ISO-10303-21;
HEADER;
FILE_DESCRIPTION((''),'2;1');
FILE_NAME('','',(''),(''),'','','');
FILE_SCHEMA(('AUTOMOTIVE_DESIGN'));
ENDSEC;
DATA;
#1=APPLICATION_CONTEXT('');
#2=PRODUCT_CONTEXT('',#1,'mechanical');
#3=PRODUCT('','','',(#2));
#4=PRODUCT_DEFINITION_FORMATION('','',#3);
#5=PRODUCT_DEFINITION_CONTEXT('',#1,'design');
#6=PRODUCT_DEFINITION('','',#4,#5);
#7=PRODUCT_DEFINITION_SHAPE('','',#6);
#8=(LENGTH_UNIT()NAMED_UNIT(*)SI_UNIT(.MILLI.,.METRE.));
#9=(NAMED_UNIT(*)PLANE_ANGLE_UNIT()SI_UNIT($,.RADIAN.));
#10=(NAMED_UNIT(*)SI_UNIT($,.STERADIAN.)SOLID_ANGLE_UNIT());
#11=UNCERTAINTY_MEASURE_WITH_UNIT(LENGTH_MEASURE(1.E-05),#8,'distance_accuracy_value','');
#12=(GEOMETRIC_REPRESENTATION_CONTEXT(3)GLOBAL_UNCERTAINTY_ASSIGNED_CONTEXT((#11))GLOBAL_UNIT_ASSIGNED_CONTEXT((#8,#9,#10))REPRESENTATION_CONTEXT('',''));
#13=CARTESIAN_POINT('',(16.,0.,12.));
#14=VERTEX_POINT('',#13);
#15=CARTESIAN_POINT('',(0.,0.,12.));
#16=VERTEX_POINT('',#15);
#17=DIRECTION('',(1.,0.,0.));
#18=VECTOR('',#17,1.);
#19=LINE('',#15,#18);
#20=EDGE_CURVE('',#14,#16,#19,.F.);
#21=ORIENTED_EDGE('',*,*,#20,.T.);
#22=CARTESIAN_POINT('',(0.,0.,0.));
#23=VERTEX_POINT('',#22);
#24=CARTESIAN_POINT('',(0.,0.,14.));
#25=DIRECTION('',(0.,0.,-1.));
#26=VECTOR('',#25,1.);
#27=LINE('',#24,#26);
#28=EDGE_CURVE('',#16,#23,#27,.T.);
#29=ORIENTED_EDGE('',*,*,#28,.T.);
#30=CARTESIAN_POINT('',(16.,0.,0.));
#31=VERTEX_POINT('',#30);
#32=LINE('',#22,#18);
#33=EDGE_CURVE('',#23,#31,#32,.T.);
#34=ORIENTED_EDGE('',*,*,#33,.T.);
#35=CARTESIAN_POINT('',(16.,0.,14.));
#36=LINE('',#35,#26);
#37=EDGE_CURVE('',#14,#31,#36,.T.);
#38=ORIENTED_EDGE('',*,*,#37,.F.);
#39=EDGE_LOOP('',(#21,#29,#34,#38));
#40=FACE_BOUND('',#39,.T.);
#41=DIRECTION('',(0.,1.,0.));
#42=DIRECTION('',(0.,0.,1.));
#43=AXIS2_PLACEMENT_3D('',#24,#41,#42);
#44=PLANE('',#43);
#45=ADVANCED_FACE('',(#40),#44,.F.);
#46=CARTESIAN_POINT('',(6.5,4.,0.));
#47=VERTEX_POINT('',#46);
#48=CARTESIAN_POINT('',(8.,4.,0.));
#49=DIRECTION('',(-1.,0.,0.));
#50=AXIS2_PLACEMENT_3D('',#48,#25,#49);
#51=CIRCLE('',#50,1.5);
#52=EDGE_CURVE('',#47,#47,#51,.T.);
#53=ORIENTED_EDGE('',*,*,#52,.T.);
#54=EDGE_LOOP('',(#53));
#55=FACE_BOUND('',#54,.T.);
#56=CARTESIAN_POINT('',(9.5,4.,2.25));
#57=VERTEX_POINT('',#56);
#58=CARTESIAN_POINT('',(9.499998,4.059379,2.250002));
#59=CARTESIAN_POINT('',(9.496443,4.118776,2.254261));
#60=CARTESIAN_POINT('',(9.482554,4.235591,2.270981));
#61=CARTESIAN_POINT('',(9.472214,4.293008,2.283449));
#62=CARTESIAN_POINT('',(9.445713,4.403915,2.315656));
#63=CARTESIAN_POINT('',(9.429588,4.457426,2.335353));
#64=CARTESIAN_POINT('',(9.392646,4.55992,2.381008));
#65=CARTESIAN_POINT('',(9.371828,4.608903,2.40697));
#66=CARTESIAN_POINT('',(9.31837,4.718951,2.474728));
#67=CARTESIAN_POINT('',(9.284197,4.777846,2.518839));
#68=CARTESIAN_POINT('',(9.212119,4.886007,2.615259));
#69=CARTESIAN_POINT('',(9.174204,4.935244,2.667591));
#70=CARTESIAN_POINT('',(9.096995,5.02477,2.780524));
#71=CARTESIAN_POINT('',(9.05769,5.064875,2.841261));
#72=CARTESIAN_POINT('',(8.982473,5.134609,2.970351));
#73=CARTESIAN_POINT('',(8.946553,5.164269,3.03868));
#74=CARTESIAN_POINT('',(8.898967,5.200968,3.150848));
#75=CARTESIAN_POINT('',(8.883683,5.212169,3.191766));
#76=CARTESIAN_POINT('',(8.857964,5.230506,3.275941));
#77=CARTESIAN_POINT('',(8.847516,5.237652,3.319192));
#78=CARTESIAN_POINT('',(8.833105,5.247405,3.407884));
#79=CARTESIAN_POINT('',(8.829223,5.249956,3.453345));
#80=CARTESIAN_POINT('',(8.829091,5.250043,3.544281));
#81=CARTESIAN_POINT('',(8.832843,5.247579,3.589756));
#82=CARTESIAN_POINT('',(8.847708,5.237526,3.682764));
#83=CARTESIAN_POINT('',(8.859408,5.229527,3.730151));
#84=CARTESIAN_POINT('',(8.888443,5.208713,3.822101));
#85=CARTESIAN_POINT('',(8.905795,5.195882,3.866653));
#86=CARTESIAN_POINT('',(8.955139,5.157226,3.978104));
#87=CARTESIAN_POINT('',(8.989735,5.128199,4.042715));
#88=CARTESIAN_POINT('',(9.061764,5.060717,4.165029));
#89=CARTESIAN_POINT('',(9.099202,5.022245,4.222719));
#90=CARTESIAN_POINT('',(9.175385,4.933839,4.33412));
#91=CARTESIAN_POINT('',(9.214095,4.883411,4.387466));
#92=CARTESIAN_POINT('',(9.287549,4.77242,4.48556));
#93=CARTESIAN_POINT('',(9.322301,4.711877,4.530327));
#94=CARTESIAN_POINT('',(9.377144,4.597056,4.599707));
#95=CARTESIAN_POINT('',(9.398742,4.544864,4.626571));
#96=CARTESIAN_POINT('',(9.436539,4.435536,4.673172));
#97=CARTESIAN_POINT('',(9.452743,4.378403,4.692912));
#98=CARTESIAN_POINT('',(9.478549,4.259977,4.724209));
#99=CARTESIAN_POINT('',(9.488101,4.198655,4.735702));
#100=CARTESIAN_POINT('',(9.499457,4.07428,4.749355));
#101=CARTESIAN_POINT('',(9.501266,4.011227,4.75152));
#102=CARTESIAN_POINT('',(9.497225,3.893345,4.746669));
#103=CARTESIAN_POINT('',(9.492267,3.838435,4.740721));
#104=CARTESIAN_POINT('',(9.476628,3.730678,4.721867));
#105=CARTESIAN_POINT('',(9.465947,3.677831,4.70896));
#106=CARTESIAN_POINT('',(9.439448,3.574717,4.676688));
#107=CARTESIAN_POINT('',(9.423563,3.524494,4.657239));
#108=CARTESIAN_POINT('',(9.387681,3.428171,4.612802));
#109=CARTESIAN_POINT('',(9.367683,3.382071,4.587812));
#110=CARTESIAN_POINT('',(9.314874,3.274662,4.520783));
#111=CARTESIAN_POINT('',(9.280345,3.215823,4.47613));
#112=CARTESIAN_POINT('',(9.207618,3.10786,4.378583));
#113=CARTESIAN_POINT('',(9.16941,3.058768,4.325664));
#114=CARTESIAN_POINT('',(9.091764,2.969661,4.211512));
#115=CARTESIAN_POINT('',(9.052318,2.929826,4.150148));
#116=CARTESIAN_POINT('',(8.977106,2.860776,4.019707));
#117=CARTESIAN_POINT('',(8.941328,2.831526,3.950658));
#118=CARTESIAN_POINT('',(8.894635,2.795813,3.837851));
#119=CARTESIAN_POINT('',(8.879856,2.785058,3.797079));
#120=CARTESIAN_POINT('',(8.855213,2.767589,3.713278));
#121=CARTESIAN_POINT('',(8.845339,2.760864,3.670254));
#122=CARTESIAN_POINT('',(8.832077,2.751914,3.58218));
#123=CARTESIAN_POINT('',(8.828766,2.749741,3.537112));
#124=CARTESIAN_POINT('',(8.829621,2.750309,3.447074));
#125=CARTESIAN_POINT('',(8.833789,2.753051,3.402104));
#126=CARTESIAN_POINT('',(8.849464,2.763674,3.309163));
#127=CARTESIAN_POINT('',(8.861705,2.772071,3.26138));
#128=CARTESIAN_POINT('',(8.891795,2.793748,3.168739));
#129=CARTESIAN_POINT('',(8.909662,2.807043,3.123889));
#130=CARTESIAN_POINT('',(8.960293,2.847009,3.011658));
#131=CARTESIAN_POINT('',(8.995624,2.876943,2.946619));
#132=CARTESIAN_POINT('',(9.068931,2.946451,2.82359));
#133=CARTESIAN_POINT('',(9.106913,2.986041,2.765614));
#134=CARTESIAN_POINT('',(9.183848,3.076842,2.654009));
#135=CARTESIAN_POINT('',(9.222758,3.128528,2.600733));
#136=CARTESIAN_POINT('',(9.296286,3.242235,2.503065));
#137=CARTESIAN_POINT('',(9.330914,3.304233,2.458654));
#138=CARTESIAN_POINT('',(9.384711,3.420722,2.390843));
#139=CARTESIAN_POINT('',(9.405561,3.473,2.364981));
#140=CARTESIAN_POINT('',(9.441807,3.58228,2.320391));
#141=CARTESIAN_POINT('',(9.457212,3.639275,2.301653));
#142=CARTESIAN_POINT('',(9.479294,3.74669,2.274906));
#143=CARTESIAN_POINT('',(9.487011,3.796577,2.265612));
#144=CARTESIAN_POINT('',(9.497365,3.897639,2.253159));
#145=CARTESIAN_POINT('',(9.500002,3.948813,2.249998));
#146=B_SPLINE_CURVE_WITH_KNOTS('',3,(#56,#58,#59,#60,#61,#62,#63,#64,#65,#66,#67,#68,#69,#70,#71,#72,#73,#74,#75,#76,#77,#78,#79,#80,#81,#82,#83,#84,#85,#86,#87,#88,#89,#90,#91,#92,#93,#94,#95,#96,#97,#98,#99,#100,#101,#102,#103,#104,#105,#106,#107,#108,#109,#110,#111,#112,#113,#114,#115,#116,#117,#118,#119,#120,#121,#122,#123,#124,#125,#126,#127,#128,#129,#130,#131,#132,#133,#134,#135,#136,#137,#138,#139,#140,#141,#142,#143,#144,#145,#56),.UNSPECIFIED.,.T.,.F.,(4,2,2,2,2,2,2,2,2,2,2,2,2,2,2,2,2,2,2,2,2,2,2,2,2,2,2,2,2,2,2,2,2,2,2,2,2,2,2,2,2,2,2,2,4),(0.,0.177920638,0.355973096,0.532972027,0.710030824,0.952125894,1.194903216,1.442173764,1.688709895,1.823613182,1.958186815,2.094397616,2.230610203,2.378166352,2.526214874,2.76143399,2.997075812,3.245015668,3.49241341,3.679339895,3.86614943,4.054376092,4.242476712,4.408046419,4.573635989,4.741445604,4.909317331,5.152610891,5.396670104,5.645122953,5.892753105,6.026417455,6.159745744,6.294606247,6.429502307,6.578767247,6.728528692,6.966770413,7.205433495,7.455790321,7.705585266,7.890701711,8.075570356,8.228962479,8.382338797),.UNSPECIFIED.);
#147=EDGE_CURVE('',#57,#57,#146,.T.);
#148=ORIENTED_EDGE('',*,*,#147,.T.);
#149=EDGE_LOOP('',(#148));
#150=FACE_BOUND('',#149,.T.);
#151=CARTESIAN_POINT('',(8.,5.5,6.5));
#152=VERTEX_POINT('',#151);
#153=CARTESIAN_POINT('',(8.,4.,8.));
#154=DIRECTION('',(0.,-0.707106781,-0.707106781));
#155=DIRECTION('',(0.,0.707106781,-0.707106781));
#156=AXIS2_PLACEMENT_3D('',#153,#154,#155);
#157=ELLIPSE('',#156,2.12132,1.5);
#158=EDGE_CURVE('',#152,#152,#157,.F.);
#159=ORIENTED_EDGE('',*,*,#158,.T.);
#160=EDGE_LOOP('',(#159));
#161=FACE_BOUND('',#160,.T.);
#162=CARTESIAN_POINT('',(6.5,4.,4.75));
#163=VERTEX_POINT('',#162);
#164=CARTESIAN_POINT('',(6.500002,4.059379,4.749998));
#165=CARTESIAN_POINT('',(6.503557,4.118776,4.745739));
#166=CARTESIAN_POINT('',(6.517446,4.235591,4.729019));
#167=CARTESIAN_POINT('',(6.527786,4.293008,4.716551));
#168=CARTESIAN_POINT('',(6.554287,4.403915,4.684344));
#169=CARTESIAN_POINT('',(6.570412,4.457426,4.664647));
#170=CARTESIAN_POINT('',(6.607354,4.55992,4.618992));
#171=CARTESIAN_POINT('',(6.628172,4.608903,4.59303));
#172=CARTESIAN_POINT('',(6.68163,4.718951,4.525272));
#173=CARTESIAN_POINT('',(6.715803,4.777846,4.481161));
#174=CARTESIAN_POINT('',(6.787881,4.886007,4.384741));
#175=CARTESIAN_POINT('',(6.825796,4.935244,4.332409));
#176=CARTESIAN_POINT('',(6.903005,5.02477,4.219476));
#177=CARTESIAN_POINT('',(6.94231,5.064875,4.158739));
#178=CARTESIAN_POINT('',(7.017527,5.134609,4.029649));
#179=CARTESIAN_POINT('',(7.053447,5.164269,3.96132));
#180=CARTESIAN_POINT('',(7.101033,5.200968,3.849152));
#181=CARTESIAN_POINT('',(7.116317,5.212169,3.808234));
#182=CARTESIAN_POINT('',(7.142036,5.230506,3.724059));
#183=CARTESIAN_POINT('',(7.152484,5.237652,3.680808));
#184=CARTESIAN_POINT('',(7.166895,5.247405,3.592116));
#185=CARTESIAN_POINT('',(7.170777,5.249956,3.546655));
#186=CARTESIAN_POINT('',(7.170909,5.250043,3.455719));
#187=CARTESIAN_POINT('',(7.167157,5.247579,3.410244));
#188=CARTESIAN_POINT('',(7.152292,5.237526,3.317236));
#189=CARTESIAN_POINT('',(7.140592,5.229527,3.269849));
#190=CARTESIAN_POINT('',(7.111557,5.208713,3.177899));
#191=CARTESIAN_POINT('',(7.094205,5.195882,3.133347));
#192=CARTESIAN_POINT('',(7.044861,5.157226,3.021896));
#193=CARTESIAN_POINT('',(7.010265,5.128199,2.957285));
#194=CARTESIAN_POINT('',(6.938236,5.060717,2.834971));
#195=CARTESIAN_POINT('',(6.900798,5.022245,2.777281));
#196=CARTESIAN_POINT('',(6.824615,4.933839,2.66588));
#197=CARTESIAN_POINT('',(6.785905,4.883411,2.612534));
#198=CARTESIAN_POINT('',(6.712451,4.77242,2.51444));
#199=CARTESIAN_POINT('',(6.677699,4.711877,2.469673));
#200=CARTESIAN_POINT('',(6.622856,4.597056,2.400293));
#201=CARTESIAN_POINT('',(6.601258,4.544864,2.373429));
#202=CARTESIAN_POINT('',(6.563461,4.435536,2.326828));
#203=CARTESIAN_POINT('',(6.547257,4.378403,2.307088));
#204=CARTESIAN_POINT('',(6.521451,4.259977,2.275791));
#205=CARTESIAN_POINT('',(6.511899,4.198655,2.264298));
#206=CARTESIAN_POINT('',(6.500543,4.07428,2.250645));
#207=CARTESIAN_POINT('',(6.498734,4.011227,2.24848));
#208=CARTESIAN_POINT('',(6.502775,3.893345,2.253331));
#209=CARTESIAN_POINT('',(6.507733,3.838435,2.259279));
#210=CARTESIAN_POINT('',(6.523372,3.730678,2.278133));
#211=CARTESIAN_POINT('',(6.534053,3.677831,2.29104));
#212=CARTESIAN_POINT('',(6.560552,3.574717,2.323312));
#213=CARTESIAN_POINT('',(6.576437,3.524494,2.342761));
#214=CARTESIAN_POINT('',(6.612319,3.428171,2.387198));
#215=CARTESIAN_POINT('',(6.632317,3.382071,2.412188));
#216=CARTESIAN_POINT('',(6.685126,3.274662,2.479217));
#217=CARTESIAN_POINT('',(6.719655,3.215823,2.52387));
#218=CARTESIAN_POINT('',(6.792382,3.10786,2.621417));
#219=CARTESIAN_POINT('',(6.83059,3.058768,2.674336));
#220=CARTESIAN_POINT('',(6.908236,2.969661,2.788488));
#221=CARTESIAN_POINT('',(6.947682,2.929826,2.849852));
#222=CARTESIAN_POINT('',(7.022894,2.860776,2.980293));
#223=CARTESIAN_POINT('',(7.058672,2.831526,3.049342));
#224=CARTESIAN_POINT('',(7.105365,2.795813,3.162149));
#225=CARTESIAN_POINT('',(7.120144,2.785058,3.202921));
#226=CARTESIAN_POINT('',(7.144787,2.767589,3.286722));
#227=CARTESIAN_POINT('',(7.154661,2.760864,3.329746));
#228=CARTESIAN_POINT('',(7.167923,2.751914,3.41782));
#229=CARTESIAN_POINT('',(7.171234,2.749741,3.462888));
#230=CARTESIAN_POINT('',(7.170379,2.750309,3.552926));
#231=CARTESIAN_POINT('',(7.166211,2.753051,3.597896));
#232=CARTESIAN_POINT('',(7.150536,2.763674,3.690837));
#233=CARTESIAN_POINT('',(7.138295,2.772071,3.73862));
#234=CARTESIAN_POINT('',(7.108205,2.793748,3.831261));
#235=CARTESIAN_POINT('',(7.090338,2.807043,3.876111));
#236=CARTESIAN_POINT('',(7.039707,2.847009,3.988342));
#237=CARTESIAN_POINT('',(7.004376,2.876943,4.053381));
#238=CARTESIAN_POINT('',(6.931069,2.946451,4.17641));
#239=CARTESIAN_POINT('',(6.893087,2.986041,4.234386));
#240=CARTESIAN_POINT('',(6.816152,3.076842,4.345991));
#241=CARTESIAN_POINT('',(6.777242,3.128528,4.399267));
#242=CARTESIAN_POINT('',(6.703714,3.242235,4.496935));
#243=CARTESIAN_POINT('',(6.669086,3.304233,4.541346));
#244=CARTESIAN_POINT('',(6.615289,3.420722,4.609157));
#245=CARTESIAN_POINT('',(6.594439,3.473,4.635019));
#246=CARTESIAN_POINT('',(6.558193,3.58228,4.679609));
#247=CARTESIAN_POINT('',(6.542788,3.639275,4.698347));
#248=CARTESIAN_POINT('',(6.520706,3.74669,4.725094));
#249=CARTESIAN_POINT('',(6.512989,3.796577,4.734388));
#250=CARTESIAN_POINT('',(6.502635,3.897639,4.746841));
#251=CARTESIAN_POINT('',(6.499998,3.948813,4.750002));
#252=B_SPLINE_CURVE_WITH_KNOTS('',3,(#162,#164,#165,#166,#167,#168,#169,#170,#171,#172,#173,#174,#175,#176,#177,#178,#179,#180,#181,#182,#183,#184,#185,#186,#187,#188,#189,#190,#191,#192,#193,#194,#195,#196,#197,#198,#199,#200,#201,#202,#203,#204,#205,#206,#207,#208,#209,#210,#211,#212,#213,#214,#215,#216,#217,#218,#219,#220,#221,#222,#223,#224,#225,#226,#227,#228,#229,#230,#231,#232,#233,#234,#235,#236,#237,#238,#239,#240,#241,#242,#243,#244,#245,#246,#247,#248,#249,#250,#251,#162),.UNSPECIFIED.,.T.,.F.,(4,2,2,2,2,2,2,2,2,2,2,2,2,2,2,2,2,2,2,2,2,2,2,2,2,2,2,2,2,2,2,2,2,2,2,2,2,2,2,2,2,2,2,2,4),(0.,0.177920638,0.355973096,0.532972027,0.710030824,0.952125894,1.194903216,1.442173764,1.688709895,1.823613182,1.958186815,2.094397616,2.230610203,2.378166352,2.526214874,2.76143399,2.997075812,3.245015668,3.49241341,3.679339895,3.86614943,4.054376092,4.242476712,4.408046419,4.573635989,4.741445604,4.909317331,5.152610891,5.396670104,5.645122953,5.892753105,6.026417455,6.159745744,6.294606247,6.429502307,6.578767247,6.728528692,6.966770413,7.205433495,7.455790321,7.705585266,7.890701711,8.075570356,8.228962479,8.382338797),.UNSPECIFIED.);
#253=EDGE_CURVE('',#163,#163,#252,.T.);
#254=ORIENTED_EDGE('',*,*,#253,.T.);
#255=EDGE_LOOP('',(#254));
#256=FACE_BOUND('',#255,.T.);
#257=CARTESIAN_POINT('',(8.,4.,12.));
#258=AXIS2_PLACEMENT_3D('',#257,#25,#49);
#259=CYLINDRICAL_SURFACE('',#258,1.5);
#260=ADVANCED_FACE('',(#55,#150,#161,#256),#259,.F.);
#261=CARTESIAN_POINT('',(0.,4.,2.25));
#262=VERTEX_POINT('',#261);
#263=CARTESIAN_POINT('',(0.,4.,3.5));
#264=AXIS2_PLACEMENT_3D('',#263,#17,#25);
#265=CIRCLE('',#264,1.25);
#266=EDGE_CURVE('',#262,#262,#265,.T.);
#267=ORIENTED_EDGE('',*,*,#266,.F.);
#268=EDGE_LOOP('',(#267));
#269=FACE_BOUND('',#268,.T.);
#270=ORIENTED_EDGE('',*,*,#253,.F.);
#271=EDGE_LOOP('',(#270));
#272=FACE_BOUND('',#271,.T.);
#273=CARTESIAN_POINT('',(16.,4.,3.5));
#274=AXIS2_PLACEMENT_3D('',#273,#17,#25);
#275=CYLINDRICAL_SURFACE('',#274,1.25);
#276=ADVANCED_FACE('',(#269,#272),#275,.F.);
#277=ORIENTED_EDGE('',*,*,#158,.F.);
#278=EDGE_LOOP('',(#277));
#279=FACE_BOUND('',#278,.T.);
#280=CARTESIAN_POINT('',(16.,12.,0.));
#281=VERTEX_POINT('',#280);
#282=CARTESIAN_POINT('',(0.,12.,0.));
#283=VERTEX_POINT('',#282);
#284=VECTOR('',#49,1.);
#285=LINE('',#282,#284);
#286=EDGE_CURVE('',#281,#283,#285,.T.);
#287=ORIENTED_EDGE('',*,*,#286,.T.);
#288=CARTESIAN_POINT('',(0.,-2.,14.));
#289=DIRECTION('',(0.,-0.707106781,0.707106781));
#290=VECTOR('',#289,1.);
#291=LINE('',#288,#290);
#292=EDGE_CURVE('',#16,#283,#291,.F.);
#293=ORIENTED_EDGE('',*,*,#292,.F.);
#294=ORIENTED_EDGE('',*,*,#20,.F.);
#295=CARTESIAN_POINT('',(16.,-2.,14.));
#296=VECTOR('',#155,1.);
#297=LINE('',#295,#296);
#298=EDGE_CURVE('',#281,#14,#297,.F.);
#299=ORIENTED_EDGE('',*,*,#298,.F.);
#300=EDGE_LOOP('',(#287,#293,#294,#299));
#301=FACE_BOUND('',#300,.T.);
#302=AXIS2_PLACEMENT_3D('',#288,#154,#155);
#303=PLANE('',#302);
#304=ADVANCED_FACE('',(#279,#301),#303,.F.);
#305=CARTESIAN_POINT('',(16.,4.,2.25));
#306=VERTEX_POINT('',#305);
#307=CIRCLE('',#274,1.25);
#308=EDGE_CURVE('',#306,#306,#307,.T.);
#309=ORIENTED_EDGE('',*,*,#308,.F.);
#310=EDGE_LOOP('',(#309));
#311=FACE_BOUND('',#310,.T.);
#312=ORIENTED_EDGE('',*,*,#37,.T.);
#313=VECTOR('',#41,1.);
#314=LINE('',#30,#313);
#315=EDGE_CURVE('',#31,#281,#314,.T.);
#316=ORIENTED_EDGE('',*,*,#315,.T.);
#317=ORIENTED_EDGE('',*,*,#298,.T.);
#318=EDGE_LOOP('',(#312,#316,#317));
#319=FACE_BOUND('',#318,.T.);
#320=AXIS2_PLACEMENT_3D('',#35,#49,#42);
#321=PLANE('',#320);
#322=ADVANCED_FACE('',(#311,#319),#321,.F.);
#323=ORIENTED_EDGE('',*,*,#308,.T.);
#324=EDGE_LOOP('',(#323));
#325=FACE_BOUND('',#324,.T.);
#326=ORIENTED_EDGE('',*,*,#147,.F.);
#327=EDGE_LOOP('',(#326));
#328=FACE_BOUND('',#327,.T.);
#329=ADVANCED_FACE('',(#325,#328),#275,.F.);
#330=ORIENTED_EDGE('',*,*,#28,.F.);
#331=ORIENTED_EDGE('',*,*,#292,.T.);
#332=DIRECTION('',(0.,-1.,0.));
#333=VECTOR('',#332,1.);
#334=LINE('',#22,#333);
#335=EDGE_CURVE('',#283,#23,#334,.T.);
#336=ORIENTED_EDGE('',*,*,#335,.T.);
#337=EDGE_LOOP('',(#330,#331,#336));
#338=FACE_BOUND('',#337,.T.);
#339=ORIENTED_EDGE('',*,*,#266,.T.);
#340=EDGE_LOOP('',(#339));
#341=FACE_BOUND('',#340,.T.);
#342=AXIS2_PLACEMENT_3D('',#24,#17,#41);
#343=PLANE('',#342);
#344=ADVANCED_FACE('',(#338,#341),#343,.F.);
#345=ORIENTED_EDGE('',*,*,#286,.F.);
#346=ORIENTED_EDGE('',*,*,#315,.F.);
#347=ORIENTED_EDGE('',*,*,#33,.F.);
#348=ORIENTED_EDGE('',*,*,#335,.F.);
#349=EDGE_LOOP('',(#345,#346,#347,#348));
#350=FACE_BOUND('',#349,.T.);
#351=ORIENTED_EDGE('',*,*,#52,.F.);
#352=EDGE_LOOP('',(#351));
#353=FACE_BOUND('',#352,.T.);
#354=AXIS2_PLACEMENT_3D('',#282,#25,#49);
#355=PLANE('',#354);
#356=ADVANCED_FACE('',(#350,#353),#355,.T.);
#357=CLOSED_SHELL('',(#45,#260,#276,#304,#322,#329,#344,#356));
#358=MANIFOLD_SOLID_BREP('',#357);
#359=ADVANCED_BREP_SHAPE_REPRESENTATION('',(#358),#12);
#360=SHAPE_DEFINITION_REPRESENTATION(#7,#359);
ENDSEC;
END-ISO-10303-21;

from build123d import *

# Parameters (mm, degrees)
ESQUISSE1_W             = 16
ESQUISSE1_H             = 12
EXTRUSION1_DEPTH        = 14
CHANFREIN1_SIZE         = 14
ESQUISSE3_R             = 1.5
ENL_V_MAT_EXTRU_2_DEPTH = 24.323807579
TROU_TARAUD_M3X0_51_D   = 2.5


with BuildPart() as part:
    # Esquisse1 → Extrusion1 (new body)
    with BuildSketch(Plane.XY):
        with Locations((8, 6)):
            Rectangle(ESQUISSE1_W, ESQUISSE1_H)
    extrude(amount=EXTRUSION1_DEPTH)

    # Chanfrein1
    # the kernel refuses this chamfer: 14 mm, written as the material it takes off along each edge
    with BuildSketch(Plane(origin=(52.003561832, 12, 14), x_dir=(0, 0.027495876610586365, -0.9996219169112968), z_dir=(-1, 0, 0))) as chanfrein1_piece_1:
        Polygon((CHANFREIN1_SIZE * 0.999621916911, CHANFREIN1_SIZE * 0.0274958766106), (-CHANFREIN1_SIZE * 0.0274958766106, CHANFREIN1_SIZE * 0.999621916911), (0, 0), align=None)
    extrude(amount=88.007123663, mode=Mode.SUBTRACT)

    # Esquisse3 → Enlèv. mat.-Extru.2 (cut, through all)
    with BuildSketch(Plane(origin=(0, 0, 0), x_dir=(-1, 0, 0), z_dir=(0, 0, -1))):
        with Locations((-8, 4)):
            Circle(ESQUISSE3_R)
    extrude(amount=-ENL_V_MAT_EXTRU_2_DEPTH, mode=Mode.SUBTRACT)

    # Trou taraudé M3x0.51 (through all)
    with Locations(Plane(origin=(16, 0, 0), x_dir=(0, 0, -1), z_dir=(1, 0, 0))):
        with Locations((-3.5, 4)):
            Hole(TROU_TARAUD_M3X0_51_D / 2)


solid = part.part
